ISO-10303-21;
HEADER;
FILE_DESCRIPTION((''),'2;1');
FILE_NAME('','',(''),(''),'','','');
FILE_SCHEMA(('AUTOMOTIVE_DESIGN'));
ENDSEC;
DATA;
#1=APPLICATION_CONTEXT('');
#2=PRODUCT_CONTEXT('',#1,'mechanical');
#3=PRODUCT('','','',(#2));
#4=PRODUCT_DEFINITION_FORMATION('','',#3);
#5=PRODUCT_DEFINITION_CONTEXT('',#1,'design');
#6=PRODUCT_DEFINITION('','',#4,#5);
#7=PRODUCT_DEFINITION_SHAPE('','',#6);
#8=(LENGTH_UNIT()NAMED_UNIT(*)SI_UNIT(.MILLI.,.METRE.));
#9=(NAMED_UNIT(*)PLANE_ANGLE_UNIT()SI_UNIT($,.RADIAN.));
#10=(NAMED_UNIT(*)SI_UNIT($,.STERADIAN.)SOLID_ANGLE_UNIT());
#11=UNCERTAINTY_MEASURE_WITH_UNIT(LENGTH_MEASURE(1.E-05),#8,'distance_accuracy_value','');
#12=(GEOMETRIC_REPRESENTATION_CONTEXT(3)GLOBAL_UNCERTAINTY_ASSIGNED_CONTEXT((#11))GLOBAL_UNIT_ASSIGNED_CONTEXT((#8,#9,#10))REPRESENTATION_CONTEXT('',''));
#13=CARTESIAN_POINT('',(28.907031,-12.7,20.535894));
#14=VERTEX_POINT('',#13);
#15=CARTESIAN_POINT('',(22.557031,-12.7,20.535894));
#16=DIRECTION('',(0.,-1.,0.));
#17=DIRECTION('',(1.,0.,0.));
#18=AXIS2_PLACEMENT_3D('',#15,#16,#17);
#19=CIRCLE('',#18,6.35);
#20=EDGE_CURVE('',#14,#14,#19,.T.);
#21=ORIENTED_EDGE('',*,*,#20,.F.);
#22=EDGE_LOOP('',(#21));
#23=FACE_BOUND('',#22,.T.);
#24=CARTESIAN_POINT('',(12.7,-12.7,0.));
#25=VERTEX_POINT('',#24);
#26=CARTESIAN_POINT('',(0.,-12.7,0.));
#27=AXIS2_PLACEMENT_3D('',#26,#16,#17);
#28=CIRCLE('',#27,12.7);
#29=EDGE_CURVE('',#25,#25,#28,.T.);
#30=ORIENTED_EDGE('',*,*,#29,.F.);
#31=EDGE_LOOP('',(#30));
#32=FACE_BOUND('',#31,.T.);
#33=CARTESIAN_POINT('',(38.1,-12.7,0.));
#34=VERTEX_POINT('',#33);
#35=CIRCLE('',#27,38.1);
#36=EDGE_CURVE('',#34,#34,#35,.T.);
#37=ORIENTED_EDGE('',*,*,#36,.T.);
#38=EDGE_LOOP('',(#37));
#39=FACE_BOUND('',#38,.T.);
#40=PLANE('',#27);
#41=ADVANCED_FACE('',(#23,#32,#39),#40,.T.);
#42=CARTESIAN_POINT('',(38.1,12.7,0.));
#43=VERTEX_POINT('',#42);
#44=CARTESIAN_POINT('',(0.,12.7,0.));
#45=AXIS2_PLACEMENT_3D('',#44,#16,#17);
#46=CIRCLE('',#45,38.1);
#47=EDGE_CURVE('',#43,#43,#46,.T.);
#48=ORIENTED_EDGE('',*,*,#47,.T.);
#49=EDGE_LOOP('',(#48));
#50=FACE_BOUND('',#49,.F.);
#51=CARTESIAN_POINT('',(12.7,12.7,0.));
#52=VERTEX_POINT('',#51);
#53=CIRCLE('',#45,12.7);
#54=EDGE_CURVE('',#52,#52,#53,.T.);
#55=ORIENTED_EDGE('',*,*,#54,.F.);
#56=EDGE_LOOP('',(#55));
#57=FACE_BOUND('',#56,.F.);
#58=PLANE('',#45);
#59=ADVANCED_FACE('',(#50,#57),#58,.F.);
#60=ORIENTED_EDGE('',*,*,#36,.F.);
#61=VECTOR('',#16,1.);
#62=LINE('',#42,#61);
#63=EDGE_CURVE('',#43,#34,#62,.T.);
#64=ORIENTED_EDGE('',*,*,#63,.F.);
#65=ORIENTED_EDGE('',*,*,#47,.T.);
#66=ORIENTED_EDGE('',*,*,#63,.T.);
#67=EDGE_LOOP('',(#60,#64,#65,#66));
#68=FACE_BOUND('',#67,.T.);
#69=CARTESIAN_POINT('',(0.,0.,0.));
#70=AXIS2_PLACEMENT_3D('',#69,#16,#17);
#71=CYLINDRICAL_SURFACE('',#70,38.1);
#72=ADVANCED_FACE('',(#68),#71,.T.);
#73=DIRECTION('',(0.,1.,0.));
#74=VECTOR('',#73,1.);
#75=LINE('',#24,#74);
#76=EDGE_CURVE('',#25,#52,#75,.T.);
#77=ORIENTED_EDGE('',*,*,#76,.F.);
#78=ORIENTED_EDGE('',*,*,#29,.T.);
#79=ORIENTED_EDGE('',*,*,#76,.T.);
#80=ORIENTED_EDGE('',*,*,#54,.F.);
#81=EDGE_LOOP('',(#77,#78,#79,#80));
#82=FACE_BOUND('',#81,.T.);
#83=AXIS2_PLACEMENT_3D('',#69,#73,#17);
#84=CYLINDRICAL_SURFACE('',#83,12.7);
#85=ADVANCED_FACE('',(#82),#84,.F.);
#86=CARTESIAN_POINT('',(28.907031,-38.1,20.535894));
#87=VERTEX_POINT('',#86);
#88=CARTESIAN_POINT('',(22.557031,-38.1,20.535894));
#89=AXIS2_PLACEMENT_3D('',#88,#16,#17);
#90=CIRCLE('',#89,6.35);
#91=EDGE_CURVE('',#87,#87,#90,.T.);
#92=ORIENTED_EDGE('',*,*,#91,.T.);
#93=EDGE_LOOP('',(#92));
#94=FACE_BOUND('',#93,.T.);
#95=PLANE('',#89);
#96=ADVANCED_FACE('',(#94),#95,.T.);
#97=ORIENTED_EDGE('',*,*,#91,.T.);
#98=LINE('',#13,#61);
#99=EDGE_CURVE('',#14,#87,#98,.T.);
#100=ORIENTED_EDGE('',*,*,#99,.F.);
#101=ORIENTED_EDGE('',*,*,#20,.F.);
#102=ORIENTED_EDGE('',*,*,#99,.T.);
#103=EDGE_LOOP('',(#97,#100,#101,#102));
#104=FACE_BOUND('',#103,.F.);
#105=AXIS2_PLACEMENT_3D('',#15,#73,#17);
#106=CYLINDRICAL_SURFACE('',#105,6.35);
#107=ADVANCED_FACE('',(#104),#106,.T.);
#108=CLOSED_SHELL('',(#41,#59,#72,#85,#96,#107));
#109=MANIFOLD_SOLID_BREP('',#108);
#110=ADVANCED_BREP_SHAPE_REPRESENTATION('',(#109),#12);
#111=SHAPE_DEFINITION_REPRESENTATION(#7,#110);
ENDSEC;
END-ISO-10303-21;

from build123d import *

# Parameters (mm, degrees)
F0_R     = 38.1
F0_R_2   = 12.7
F1_DEPTH = 12.7
F2_R     = 6.35
F3_DEPTH = 25.4


# Not quite as in the source:
# - a feature names something its author has since deleted; it is built from what else it names


with BuildPart() as f1:
    # F0 (on Front) → F1 (new body, symmetric)
    with BuildSketch(Plane.XZ):
        Circle(F0_R)
        Circle(F0_R_2, mode=Mode.SUBTRACT)
    extrude(amount=F1_DEPTH, both=True)

    # F2 (on face) → F3 (join)
    with BuildSketch(Plane.XZ.offset(12.7)):
        with Locations((22.5570311415, 20.5358944896)):
            Circle(F2_R)
    extrude(amount=F3_DEPTH)


solid = f1.part
